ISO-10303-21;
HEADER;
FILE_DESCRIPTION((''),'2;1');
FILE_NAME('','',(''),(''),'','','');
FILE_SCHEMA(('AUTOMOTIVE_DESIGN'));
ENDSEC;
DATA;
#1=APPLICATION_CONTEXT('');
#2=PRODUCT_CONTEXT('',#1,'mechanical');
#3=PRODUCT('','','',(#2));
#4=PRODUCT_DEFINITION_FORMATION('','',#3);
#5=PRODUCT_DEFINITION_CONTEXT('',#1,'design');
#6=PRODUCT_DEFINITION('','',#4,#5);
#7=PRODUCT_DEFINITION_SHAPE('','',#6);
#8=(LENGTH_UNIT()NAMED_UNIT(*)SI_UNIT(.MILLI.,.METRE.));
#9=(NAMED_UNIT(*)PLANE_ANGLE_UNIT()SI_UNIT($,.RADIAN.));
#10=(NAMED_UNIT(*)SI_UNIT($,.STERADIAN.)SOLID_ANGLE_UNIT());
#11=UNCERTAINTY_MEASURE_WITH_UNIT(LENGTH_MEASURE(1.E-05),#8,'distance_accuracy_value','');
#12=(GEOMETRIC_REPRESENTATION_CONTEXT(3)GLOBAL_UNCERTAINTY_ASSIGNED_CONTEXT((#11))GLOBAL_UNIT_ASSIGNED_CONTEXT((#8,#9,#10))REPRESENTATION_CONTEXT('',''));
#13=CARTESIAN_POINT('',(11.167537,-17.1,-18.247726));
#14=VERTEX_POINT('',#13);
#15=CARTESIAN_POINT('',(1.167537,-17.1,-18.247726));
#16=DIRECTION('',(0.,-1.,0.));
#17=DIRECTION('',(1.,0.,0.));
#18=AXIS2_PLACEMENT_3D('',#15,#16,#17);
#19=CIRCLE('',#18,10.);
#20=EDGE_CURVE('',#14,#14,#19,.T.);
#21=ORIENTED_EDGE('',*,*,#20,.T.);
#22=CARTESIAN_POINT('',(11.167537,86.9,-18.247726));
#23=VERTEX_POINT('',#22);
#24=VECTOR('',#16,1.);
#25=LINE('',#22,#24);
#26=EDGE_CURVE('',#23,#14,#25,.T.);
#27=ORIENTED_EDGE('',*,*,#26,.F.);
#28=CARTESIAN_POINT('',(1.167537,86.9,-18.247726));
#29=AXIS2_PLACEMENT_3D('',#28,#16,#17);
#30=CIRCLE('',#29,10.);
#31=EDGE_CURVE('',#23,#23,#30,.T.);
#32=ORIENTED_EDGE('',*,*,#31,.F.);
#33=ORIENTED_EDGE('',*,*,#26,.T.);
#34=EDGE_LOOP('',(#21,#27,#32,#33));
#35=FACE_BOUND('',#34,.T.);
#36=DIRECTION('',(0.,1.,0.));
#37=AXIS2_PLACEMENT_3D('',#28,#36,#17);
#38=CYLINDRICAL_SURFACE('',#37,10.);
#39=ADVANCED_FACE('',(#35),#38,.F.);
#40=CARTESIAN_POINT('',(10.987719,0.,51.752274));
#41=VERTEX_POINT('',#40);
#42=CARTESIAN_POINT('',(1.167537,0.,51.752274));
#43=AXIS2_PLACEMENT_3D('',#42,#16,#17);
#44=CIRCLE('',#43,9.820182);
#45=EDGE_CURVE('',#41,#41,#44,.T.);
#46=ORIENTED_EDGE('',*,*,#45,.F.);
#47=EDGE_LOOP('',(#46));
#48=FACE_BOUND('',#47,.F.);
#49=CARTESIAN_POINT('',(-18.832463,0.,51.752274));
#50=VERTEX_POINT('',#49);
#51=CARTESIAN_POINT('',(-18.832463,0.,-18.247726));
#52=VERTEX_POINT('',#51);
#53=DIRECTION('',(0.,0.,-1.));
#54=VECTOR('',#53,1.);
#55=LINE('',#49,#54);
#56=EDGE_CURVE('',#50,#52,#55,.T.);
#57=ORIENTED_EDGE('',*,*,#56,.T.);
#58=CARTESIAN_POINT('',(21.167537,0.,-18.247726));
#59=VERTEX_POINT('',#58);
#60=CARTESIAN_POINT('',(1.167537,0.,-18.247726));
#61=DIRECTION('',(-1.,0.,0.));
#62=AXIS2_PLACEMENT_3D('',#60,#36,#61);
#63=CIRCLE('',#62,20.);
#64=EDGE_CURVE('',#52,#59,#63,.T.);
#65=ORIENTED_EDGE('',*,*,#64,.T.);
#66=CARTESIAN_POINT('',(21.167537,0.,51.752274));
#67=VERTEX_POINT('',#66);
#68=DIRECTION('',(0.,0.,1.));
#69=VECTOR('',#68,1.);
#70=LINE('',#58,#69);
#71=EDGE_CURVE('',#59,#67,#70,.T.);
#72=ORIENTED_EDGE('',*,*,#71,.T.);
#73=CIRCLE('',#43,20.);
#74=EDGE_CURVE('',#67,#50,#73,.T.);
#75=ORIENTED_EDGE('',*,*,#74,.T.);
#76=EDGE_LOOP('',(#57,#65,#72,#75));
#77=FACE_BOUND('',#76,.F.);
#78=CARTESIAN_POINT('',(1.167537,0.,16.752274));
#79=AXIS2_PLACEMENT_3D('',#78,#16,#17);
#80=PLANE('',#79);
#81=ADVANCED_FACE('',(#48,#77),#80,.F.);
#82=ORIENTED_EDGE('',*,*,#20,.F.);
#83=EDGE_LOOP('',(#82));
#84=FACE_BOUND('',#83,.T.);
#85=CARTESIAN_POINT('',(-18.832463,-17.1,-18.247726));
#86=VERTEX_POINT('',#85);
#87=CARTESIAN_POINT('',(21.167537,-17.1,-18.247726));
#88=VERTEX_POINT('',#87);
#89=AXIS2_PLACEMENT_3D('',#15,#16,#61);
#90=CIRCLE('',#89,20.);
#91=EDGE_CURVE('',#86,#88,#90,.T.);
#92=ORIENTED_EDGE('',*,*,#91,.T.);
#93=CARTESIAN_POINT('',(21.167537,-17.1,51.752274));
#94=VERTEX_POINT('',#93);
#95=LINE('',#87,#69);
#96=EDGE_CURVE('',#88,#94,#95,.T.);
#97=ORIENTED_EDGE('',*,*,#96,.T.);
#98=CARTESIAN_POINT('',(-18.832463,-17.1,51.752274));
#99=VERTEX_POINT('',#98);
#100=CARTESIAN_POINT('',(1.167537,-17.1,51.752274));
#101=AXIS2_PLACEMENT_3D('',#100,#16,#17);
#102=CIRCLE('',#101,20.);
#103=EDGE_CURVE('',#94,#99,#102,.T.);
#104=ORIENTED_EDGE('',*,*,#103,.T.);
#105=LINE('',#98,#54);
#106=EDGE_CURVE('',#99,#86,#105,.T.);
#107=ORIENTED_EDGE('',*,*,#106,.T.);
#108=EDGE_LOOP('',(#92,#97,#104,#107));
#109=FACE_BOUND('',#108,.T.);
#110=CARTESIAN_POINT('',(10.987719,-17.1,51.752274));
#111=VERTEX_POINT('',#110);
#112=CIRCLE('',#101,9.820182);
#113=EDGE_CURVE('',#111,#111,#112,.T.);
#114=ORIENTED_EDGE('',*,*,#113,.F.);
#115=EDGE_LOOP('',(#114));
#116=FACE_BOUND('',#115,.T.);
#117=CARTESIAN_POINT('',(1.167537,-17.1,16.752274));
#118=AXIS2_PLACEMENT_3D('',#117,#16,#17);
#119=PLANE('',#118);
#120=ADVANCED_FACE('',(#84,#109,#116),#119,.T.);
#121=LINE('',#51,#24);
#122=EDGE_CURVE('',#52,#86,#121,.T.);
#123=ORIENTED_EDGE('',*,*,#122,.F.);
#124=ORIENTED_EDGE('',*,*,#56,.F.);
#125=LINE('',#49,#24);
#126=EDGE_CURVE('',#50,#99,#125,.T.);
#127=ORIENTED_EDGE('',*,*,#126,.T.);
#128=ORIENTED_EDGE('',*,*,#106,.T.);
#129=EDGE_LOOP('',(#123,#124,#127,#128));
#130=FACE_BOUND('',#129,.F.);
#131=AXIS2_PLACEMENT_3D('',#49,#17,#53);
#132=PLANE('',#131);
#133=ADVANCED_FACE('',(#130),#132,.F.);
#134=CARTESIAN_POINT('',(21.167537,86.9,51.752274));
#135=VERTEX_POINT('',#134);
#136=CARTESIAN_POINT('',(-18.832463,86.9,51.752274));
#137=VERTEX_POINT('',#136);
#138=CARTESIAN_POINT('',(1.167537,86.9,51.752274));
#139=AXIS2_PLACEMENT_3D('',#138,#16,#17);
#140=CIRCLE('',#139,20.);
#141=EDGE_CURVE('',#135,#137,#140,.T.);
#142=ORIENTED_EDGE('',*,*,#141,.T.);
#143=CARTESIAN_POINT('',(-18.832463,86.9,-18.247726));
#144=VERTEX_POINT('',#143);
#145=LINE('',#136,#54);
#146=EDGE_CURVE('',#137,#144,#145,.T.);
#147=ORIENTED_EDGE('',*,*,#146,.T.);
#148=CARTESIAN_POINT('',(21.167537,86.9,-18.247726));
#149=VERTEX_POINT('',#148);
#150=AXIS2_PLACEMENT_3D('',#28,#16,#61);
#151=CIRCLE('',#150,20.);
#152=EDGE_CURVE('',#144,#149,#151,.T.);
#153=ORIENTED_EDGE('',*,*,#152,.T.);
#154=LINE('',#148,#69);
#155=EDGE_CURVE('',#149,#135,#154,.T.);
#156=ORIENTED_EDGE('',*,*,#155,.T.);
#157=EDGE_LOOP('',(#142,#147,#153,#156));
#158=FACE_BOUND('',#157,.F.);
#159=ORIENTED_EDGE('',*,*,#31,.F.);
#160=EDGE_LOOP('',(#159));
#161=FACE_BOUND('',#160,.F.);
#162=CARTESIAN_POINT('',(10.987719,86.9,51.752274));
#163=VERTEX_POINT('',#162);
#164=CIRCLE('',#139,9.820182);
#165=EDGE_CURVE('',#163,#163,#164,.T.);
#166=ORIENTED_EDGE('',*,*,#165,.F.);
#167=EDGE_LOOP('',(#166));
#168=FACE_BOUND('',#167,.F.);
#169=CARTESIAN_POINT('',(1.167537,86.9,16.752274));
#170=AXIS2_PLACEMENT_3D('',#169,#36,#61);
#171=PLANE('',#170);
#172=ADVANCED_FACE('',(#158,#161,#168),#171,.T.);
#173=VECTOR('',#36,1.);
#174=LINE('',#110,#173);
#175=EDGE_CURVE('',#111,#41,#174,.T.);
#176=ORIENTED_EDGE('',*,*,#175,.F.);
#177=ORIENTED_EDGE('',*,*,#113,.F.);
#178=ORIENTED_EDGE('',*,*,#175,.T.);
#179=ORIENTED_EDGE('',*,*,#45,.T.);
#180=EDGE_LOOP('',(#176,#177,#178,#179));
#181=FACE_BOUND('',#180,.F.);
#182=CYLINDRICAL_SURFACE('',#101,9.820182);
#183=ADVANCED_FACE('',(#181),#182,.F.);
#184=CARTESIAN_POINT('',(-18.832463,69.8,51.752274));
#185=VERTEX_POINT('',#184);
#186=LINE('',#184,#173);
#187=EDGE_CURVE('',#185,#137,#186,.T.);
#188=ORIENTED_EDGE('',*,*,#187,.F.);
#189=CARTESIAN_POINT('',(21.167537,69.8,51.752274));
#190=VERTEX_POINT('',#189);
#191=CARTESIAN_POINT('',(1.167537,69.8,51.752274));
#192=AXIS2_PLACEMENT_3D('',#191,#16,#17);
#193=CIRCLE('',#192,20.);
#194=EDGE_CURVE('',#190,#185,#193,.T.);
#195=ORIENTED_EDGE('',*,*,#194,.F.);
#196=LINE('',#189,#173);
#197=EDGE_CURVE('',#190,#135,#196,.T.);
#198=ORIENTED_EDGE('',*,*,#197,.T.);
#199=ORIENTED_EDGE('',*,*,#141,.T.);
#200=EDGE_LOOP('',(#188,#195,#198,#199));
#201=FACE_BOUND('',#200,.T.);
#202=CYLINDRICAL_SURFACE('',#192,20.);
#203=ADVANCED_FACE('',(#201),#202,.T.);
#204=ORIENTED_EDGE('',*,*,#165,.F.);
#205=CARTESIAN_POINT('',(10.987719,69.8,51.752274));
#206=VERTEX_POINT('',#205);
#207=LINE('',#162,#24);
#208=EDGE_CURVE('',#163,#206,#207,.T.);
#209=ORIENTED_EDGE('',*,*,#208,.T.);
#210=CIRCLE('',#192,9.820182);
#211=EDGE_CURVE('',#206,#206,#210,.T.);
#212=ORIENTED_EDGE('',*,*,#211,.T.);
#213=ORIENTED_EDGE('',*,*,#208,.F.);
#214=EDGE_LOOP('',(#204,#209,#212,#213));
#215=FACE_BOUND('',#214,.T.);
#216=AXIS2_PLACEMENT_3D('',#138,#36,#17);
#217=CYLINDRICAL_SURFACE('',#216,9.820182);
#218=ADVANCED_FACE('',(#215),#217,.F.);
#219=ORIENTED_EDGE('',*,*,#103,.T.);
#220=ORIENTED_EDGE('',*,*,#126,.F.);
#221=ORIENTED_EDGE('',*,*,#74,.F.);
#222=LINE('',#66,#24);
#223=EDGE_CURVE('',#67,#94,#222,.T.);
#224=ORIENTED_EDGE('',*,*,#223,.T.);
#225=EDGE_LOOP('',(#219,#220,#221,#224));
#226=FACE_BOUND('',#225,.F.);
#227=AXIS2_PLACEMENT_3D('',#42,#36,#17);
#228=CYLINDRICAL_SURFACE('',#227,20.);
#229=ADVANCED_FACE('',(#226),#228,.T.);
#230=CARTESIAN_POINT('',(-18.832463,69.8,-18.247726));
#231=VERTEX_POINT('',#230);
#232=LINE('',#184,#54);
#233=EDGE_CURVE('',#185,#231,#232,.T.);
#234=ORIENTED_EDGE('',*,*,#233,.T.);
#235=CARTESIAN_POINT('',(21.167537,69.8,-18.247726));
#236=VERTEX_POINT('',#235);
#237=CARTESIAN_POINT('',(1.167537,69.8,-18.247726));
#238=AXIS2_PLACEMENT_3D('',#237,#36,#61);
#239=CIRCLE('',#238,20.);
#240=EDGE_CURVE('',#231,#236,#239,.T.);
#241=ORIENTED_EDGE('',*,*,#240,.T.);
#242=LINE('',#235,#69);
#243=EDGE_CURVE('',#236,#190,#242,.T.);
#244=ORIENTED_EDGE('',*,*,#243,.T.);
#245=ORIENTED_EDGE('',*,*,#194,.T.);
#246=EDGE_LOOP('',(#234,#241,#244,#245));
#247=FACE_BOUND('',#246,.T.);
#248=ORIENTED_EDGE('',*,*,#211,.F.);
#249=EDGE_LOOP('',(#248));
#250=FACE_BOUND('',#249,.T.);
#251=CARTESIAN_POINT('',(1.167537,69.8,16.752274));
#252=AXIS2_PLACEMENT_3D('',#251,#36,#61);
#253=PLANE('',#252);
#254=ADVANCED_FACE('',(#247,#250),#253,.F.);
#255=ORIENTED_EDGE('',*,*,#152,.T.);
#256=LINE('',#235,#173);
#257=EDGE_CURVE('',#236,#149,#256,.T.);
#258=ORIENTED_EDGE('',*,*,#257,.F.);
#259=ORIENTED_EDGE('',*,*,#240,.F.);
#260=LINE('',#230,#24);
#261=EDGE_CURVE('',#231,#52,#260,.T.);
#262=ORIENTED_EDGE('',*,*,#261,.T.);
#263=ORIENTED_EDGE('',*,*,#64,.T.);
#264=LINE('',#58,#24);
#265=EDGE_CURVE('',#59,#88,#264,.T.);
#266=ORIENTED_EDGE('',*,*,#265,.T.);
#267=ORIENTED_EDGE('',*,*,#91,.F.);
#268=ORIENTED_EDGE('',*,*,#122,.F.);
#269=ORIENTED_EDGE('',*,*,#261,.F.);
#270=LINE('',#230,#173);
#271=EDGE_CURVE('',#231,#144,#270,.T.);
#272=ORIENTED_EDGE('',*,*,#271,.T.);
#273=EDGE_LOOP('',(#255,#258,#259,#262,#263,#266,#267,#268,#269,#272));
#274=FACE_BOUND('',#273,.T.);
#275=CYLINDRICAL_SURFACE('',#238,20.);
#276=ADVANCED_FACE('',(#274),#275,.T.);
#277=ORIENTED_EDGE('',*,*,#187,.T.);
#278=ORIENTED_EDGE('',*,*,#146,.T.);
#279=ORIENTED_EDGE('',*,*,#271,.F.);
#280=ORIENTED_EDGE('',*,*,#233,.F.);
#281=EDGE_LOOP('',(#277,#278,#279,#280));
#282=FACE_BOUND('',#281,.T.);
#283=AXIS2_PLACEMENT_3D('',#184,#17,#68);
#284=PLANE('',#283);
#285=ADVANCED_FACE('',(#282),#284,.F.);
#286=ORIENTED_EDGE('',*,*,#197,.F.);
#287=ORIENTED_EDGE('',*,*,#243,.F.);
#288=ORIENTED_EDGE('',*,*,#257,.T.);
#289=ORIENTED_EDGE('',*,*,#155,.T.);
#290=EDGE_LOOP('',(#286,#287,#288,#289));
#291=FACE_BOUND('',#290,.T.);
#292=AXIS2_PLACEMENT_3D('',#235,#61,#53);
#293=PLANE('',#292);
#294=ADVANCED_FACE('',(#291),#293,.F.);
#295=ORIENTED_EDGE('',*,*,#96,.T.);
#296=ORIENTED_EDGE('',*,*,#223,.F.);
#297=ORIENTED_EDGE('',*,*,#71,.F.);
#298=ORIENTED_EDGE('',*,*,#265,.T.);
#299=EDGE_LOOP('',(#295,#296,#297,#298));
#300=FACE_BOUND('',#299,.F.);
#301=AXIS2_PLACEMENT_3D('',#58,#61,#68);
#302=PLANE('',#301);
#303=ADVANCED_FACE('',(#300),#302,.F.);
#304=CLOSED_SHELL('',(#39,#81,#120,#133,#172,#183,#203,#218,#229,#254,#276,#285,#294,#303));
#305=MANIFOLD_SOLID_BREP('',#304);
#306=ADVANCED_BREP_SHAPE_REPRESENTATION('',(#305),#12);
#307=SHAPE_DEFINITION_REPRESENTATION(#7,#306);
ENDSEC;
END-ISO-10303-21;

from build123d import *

# Parameters (mm, degrees)
F1_DEPTH = 17.1
F2_R     = 9.8201820523
F3_DEPTH = 25
F5_DEPTH = 34.9
F6_R     = 10
F7_DEPTH = 52.001


with BuildPart() as f1:
    # F0 (on Front) → F1 (new body)
    with BuildSketch(Plane.XZ):
        with BuildLine():
            Line((-18.8324629198, 51.7522737756), (-18.8324629198, -18.2477262244))
            ThreePointArc((-18.8324629198, -18.2477262244), (1.1675370802, -38.2477262244), (21.1675370802, -18.2477262244))
            Line((21.1675370802, -18.2477262244), (21.1675370802, 51.7522737756))
            ThreePointArc((21.1675370802, 51.7522737756), (1.1675370802, 71.7522737756), (-18.8324629198, 51.7522737756))
        make_face()
    extrude(amount=F1_DEPTH)

    # F2 (on face) → F3 (cut)
    with BuildSketch(Plane.XZ.offset(17.1)):
        with Locations((1.1675370802, 51.7522737756)):
            Circle(F2_R)
    extrude(amount=-F3_DEPTH, mode=Mode.SUBTRACT)

    # F4 (on face) → F5 (join)
    with BuildSketch(Plane(origin=(0, 0, 0), x_dir=(-1, 0, 0), z_dir=(0, 1, 0))):
        with BuildLine():
            ThreePointArc((-21.1675370802, -18.2477262244), (-1.1675370802, -38.2477262244), (18.8324629198, -18.2477262244))
            ThreePointArc((18.8324629198, -18.2477262244), (-1.1675370802, 1.7522737756), (-21.1675370802, -18.2477262244))
        make_face()
    extrude(amount=F5_DEPTH)

    # F6 (on face) → F7 (cut, through all)
    with BuildSketch(Plane.XZ.offset(17.1)):
        with Locations((1.1675370802, -18.2477262244)):
            Circle(F6_R)
    extrude(amount=-F7_DEPTH, mode=Mode.SUBTRACT)

    # F8: F1 across face


with BuildPart() as f1_1:
    add(f1.part)
    add(f1.part.mirror(Plane(origin=(1.1675370802, 34.9, -18.2477262244), x_dir=(-1, 0, 0), z_dir=(0, 1, 0))))


solid = f1_1.part
